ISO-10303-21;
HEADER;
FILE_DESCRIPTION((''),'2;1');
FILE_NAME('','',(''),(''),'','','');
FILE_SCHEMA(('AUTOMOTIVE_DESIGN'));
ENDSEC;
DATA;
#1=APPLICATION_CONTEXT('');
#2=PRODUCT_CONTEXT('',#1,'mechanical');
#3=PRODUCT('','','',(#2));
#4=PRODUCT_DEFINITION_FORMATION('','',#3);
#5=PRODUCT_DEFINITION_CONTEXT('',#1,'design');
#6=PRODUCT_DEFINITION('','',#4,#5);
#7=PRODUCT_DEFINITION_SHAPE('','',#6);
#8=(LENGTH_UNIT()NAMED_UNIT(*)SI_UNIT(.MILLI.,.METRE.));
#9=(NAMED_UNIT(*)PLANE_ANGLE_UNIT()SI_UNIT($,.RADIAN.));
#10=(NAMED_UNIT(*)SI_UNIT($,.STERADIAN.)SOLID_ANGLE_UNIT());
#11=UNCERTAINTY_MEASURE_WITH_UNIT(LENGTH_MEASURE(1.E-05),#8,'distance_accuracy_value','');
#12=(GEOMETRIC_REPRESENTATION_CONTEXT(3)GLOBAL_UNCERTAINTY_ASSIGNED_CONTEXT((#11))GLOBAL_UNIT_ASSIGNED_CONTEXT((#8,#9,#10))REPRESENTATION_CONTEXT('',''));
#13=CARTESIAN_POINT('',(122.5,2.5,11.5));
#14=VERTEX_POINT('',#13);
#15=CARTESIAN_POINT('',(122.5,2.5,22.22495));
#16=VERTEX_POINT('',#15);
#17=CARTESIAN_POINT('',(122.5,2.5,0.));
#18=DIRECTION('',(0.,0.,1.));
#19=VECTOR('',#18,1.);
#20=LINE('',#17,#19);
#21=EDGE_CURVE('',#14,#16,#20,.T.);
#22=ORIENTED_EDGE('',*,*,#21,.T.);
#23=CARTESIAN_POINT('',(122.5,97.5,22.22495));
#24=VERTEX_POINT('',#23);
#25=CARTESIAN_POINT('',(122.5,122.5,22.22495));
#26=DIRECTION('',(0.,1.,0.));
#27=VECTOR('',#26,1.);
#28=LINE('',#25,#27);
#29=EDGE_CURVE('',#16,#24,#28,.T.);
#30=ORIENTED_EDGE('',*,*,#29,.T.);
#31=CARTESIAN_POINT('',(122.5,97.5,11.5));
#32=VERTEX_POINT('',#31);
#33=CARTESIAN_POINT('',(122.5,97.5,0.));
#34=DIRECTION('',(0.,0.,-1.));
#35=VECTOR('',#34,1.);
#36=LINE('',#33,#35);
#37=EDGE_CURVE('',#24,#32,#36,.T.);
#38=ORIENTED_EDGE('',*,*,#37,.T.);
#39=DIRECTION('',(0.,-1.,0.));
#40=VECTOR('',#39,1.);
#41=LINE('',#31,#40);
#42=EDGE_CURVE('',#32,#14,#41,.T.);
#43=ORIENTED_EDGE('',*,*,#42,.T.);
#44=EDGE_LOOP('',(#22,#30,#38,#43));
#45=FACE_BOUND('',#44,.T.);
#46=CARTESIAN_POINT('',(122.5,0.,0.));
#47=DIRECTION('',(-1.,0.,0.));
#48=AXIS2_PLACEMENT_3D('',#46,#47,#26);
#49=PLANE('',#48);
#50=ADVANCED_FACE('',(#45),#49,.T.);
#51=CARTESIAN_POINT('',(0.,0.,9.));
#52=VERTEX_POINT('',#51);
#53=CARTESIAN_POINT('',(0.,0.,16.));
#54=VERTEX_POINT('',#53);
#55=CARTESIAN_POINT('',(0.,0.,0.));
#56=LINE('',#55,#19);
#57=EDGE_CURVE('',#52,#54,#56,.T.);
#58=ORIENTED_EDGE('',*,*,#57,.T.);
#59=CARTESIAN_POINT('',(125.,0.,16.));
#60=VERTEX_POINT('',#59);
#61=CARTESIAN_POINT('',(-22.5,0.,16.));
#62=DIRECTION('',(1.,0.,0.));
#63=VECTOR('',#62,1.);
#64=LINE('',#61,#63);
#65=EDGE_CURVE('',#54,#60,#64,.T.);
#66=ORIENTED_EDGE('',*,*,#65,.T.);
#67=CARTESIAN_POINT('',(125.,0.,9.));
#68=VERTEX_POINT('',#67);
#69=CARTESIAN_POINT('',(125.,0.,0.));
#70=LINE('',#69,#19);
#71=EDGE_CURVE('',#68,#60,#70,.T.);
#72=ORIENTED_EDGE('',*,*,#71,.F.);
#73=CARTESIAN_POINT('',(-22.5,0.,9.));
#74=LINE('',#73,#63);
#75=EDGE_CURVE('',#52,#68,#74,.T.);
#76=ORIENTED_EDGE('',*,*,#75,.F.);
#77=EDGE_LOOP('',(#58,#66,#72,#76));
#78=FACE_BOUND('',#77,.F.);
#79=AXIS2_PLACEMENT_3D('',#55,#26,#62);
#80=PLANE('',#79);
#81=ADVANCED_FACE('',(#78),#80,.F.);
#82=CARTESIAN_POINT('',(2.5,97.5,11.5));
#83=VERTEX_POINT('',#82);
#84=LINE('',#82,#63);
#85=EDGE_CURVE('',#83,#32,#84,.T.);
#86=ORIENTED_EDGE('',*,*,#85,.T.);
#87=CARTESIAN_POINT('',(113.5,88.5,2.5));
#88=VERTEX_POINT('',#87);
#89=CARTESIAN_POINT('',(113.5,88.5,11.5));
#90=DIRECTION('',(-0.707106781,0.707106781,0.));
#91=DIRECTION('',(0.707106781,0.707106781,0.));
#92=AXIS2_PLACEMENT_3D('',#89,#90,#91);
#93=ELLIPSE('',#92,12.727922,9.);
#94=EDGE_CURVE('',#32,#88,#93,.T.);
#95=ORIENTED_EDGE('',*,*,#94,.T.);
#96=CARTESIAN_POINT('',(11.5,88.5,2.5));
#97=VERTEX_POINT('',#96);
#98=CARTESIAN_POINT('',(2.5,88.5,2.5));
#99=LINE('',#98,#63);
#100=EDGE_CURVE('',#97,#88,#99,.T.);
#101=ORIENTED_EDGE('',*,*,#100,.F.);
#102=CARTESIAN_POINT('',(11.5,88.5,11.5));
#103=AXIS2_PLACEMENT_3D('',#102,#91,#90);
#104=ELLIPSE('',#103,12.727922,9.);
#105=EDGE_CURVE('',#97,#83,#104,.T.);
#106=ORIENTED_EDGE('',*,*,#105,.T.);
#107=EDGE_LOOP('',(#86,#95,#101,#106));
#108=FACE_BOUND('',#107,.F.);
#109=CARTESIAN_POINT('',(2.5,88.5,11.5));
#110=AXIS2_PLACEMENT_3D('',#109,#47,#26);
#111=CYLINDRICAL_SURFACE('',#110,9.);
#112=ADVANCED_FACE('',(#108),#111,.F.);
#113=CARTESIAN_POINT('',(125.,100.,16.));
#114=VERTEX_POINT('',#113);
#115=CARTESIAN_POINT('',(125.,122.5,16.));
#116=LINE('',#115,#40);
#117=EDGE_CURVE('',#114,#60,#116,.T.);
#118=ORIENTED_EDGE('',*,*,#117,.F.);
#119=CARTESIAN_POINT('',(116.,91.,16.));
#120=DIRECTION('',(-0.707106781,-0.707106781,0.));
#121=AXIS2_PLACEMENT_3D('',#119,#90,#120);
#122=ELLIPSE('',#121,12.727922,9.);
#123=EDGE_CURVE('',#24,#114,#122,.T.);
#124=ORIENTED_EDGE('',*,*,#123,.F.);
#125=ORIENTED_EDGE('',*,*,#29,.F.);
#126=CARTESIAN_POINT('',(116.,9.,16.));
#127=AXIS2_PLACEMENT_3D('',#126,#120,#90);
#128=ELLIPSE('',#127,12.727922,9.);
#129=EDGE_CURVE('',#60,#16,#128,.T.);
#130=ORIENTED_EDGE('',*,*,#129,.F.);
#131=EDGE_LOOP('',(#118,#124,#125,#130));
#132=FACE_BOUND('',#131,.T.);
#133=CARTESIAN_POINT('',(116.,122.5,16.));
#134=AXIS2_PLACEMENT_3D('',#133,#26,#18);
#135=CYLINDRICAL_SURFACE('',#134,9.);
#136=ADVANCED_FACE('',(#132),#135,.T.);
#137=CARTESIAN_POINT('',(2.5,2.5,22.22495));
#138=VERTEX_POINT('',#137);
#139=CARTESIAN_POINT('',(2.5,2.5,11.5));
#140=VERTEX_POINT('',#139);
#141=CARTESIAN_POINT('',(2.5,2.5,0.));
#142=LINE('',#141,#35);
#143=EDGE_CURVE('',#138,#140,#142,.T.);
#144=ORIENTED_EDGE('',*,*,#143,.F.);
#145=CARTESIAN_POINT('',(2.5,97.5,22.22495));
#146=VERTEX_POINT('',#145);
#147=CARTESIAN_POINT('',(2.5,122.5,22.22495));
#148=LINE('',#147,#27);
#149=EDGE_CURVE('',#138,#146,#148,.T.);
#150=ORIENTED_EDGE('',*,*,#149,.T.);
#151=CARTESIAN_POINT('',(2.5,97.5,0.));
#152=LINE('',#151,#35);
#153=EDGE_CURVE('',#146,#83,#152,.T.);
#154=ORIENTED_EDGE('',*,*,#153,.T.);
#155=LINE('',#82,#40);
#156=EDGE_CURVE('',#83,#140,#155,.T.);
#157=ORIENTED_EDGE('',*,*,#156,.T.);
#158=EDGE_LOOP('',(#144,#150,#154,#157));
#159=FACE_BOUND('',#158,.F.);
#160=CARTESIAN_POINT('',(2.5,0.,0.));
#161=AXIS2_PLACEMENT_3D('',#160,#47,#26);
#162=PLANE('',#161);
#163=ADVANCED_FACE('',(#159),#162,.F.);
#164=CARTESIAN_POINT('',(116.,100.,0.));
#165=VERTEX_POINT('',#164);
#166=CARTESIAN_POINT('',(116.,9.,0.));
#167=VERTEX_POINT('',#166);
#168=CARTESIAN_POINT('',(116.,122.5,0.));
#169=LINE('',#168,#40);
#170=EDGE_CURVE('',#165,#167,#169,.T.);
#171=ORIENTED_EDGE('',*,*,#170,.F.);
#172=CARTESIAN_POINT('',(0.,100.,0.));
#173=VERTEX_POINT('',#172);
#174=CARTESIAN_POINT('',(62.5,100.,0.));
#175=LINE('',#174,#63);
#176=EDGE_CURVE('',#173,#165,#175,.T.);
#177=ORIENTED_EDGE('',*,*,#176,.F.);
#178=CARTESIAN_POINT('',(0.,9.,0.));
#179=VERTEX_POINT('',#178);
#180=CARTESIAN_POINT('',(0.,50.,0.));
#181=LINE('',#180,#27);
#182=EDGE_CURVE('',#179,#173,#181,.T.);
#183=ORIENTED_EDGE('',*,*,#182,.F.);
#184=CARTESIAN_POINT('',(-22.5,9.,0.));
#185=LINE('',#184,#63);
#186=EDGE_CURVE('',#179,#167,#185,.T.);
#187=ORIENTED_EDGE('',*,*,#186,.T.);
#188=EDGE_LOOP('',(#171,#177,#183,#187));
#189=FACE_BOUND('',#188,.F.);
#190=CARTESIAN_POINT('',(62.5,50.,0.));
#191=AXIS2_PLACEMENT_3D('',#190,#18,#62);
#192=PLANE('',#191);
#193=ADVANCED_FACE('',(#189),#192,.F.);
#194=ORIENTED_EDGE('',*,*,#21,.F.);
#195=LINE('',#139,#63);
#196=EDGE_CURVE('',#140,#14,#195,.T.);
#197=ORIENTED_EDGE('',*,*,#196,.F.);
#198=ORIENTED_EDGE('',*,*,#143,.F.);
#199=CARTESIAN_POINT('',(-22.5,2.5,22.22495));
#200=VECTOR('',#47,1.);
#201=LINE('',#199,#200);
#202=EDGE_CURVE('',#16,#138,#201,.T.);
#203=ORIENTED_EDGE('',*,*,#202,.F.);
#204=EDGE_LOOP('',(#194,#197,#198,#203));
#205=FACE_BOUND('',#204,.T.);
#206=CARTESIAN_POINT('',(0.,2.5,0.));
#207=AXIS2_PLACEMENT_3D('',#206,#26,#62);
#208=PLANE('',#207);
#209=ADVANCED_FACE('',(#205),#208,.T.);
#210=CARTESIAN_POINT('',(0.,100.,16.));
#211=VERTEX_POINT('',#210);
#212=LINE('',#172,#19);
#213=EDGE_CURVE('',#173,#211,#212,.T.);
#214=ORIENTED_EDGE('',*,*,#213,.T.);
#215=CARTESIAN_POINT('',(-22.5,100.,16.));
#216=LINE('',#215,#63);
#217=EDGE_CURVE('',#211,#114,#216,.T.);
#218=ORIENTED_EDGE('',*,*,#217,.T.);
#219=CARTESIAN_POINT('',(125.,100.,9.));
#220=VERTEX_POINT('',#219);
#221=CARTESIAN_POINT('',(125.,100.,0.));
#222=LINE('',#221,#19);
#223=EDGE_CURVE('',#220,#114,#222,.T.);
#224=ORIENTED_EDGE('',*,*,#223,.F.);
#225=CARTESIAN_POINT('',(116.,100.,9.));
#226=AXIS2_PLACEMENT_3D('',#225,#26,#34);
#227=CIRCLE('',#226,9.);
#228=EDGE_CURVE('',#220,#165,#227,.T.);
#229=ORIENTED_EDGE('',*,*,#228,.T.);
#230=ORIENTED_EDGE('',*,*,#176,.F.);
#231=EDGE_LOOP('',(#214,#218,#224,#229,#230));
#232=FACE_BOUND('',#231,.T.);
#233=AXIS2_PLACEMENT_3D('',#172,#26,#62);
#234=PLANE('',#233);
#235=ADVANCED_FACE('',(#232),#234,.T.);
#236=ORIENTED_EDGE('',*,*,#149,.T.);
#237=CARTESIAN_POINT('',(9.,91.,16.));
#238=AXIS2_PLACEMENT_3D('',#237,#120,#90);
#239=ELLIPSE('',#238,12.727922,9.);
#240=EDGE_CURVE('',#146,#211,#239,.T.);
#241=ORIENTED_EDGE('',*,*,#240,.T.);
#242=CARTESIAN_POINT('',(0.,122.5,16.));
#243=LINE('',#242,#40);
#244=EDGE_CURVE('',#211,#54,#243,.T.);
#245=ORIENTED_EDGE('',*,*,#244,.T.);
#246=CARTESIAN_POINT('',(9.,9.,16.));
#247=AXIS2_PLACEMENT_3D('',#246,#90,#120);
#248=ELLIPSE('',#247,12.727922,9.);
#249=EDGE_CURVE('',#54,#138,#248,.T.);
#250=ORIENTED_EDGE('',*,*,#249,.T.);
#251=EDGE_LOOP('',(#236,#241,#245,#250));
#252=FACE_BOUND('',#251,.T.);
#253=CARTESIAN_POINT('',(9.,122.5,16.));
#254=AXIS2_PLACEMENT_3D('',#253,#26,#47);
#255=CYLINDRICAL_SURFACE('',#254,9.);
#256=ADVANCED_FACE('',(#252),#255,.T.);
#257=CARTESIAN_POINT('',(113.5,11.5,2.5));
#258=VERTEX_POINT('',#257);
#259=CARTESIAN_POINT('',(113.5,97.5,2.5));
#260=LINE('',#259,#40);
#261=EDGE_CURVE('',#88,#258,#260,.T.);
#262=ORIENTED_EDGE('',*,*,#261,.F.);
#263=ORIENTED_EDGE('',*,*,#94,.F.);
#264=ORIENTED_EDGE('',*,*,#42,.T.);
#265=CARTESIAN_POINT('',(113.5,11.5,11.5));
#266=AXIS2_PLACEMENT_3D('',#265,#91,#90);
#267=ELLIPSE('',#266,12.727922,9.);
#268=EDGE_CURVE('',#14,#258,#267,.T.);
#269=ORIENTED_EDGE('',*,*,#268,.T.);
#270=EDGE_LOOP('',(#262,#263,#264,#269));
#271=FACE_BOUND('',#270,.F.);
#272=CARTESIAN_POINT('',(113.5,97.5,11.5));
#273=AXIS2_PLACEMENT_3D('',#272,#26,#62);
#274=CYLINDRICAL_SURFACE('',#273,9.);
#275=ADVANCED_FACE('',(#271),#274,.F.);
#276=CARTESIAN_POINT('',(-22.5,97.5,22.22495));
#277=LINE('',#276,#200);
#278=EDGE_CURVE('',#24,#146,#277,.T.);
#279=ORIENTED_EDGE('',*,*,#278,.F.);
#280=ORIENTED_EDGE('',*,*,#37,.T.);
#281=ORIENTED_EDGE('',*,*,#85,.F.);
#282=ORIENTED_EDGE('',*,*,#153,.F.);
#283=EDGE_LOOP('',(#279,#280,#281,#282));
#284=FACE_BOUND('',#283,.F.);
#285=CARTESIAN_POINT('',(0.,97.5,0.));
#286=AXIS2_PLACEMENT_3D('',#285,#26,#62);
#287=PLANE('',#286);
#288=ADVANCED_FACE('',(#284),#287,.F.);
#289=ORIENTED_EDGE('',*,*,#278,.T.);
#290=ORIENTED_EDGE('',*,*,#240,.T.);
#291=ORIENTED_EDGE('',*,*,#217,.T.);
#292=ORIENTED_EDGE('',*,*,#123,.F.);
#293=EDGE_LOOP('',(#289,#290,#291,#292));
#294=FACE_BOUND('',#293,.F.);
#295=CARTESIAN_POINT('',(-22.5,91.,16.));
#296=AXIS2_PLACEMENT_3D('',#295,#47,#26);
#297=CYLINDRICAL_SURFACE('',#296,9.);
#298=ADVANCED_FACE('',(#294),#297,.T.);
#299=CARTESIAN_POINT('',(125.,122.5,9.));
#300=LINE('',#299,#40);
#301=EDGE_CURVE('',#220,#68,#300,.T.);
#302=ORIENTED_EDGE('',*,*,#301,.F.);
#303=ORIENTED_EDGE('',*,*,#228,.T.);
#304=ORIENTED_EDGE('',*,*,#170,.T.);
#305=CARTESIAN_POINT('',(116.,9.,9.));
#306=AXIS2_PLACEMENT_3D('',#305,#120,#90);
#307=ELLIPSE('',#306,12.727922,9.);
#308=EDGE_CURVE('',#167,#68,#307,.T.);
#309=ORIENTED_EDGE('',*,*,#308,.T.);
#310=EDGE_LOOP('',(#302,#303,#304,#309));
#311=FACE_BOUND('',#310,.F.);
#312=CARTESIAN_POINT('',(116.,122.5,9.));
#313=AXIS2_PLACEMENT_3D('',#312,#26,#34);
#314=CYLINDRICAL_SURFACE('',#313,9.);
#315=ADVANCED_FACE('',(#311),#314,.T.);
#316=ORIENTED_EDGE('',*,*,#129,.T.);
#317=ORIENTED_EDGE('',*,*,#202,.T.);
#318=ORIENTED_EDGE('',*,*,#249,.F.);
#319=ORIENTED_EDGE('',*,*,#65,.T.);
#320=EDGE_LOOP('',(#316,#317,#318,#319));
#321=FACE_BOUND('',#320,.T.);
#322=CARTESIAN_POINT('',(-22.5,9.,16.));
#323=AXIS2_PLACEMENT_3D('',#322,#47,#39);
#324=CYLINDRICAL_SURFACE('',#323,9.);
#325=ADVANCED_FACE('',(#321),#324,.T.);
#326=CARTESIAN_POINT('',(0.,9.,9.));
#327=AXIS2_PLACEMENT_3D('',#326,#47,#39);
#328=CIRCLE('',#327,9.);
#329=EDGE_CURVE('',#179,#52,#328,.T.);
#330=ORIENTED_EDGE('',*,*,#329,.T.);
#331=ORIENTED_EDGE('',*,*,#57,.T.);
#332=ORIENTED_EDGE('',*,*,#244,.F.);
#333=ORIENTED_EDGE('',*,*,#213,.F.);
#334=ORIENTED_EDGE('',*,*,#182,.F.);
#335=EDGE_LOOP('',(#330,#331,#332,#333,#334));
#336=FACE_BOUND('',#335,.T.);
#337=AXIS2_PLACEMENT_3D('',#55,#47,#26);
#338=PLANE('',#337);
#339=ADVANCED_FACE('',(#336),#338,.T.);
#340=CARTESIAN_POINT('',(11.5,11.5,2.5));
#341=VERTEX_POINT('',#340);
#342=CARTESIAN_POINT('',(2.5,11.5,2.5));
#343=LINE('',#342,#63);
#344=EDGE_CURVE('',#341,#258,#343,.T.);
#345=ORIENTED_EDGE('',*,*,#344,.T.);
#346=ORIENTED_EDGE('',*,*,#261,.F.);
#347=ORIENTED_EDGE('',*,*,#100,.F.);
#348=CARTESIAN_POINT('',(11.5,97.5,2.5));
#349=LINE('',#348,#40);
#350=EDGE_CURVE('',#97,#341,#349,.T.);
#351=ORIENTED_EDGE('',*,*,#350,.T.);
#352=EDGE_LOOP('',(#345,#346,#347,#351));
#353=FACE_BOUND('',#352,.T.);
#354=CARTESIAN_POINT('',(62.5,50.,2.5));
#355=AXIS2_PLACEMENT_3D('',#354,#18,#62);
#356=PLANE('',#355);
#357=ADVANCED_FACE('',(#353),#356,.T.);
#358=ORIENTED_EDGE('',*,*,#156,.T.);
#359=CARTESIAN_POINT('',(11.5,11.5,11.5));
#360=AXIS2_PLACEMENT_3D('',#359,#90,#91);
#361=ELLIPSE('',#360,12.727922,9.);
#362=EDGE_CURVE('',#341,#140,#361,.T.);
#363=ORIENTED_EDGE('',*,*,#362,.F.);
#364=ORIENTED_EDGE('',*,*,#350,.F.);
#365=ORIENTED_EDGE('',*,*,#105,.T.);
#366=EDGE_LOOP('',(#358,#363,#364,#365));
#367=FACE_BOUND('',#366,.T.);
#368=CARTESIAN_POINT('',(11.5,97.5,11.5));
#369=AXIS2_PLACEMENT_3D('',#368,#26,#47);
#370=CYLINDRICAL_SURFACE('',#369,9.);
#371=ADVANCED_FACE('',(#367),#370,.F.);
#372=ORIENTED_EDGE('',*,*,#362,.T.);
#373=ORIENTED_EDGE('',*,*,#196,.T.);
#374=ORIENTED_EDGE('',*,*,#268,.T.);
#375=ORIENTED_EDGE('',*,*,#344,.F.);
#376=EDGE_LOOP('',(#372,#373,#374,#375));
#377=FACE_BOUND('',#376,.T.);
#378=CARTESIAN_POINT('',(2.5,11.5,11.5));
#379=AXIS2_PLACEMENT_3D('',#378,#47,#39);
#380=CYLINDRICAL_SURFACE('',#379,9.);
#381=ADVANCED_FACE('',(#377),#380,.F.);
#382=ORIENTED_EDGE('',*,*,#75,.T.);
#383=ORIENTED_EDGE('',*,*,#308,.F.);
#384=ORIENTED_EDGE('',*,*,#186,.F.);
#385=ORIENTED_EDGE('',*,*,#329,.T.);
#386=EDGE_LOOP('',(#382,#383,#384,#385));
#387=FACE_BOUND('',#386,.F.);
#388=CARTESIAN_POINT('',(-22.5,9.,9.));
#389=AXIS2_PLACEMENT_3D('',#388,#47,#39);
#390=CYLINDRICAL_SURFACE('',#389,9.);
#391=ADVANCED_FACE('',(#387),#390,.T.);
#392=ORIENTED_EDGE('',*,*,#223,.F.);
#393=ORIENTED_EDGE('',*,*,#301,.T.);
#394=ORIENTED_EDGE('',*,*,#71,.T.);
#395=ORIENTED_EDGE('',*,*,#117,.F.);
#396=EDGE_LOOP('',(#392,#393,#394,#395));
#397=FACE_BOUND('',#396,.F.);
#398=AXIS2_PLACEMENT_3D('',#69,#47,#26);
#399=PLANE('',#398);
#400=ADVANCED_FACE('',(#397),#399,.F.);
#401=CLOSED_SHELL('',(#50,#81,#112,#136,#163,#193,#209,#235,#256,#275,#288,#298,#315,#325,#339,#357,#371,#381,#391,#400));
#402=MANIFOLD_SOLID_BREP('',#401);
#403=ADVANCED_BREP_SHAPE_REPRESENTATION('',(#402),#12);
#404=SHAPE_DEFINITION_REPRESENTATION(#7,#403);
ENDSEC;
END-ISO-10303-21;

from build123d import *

# Parameters (mm, degrees)
F0_W        = 125
F0_H        = 100
F1_DEPTH    = 25
F2_T        = -2.5
F3_T1_DEPTH = 95
F3_T3_DEPTH = 120
F3_T5_DEPTH = 170
F3_T7_DEPTH = 145


# Not quite as in the source:
# - a fillet or chamfer that OpenCascade refuses, or shapes differently, is made with other operations: its cross-section is extruded or revolved along the edge and cut away or added


with BuildPart() as f1:
    # F0 (on Top) → F1 (new body)
    with BuildSketch(Plane.XY):
        with Locations((62.5, 50)):
            Rectangle(F0_W, F0_H)
    extrude(amount=F1_DEPTH)

    # F2
    f2_openings = [f1.faces().sort_by_distance(p)[0] for p in [
        (62.5, 50, 25),
    ]]
    offset(amount=F2_T, openings=f2_openings)

    # F3: fillet of radius 9 on 10 edges, made by hand

    # F3_s2 → F3_t1 (join)
    with BuildSketch(Plane.XZ.offset(-97.5)):
        with BuildLine():
            ThreePointArc((2.5, 11.5), (5.1360389693, 5.1360389693), (11.5, 2.5))
            Line((11.5, 2.5), (2.5, 2.5))
            Line((2.5, 2.5), (2.5, 11.5))
        make_face()
        with BuildLine():
            ThreePointArc((122.5, 11.5), (119.8639610307, 5.1360389693), (113.5, 2.5))
            Line((113.5, 2.5), (122.5, 2.5))
            Line((122.5, 2.5), (122.5, 11.5))
        make_face()
    extrude(amount=F3_T1_DEPTH)

    # F3_s4 → F3_t3 (join)
    with BuildSketch(Plane.YZ.offset(2.5)):
        with BuildLine():
            ThreePointArc((2.5, 11.5), (5.1360389693, 5.1360389693), (11.5, 2.5))
            Line((11.5, 2.5), (2.5, 2.5))
            Line((2.5, 2.5), (2.5, 11.5))
        make_face()
        with BuildLine():
            ThreePointArc((97.5, 11.5), (94.8639610307, 5.1360389693), (88.5, 2.5))
            Line((88.5, 2.5), (97.5, 2.5))
            Line((97.5, 2.5), (97.5, 11.5))
        make_face()
    extrude(amount=F3_T3_DEPTH)

    # F3_s6 → F3_t5 (cut)
    with BuildSketch(Plane.YZ.offset(-22.5)):
        with BuildLine():
            ThreePointArc((0, 16), (2.6360389693, 22.3639610307), (9, 25))
            Line((9, 25), (0, 25))
            Line((0, 25), (0, 16))
        make_face()
        with BuildLine():
            ThreePointArc((0, 9), (2.6360389693, 2.6360389693), (9, 0))
            Line((9, 0), (0, 0))
            Line((0, 0), (0, 9))
        make_face()
        with BuildLine():
            ThreePointArc((100, 16), (97.3639610307, 22.3639610307), (91, 25))
            Line((91, 25), (100, 25))
            Line((100, 25), (100, 16))
        make_face()
    extrude(amount=F3_T5_DEPTH, mode=Mode.SUBTRACT)

    # F3_s8 → F3_t7 (cut)
    with BuildSketch(Plane.XZ.offset(-122.5)):
        with BuildLine():
            ThreePointArc((116, 0), (122.3639610307, 2.6360389693), (125, 9))
            Line((125, 9), (125, 0))
            Line((125, 0), (116, 0))
        make_face()
        with BuildLine():
            ThreePointArc((116, 25), (122.3639610307, 22.3639610307), (125, 16))
            Line((125, 16), (125, 25))
            Line((125, 25), (116, 25))
        make_face()
        with BuildLine():
            ThreePointArc((0, 16), (2.6360389693, 22.3639610307), (9, 25))
            Line((9, 25), (0, 25))
            Line((0, 25), (0, 16))
        make_face()
    extrude(amount=F3_T7_DEPTH, mode=Mode.SUBTRACT)


solid = f1.part
